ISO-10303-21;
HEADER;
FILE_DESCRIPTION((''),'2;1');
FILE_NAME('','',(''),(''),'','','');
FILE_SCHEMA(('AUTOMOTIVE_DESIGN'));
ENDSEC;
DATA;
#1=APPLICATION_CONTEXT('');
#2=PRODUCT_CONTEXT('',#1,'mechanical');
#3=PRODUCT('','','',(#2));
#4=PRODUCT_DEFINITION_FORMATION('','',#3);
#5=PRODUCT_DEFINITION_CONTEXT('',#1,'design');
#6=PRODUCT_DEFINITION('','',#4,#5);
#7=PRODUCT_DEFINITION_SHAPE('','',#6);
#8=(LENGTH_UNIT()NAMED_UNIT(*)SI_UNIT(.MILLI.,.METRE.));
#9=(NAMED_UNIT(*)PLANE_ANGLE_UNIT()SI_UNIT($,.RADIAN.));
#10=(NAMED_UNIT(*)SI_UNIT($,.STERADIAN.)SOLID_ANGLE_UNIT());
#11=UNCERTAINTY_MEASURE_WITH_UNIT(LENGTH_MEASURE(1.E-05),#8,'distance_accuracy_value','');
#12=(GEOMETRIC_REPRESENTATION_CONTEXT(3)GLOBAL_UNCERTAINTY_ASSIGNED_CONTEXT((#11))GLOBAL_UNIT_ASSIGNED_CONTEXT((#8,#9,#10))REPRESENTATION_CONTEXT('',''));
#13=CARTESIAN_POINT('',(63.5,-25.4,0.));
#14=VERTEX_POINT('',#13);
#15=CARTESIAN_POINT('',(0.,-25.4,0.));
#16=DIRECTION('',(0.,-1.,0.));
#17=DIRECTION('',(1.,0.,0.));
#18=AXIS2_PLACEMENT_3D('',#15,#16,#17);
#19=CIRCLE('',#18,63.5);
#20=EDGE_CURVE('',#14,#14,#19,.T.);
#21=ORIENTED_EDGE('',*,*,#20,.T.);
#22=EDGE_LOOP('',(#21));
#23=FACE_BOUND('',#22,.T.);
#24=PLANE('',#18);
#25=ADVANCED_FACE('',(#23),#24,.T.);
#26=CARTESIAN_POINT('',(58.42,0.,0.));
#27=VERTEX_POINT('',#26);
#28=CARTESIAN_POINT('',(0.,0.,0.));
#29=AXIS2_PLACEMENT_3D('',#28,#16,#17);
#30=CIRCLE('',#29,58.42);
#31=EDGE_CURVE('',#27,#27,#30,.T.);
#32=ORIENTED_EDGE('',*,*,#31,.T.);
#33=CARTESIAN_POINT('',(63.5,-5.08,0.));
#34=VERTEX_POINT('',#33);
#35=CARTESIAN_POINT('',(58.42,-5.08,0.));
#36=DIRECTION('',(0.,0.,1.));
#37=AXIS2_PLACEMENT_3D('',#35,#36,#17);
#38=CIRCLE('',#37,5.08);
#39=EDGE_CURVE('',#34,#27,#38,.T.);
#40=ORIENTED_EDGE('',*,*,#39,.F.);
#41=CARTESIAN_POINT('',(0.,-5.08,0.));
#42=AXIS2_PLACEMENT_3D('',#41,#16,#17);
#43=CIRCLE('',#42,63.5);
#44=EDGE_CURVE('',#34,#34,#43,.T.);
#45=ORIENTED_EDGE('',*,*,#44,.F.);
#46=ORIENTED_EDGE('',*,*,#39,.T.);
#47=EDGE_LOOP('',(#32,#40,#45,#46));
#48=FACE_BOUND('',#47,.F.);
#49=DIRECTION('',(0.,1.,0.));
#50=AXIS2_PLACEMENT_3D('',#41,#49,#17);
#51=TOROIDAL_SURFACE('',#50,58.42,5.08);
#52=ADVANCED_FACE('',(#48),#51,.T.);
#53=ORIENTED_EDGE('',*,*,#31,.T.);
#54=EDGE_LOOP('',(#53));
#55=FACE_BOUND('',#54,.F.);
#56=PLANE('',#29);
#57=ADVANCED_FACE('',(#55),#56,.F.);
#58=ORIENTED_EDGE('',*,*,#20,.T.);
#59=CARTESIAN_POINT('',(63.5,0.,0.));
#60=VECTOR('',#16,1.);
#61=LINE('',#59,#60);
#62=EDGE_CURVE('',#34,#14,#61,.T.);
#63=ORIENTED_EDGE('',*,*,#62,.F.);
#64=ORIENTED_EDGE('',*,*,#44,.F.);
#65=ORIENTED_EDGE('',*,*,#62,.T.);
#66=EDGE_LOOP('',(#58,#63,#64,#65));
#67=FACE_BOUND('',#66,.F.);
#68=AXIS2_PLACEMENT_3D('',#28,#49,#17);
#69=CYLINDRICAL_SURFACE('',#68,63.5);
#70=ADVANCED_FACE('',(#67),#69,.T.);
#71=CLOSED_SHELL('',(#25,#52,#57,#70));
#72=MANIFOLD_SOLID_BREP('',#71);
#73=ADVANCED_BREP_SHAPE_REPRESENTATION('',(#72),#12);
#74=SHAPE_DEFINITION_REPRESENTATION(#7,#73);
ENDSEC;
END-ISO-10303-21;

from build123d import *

# Parameters (mm, degrees)
F0_R     = 63.5
F1_DEPTH = 25.4
F4_R     = 5.08


# Not quite as in the source:
# - the program builds the solid bodies; features that only make, move or delete a surface that nothing else refers to are left out


with BuildPart() as f1:
    # F0 (on Front) → F1 (new body)
    with BuildSketch(Plane.XZ):
        Circle(F0_R)
    extrude(amount=F1_DEPTH)

    # F4
    f4_edges = [f1.edges().sort_by_distance(p)[0] for p in [
        (-63.5, 0, 0),
    ]]
    fillet(f4_edges, radius=F4_R)


solid = f1.part
